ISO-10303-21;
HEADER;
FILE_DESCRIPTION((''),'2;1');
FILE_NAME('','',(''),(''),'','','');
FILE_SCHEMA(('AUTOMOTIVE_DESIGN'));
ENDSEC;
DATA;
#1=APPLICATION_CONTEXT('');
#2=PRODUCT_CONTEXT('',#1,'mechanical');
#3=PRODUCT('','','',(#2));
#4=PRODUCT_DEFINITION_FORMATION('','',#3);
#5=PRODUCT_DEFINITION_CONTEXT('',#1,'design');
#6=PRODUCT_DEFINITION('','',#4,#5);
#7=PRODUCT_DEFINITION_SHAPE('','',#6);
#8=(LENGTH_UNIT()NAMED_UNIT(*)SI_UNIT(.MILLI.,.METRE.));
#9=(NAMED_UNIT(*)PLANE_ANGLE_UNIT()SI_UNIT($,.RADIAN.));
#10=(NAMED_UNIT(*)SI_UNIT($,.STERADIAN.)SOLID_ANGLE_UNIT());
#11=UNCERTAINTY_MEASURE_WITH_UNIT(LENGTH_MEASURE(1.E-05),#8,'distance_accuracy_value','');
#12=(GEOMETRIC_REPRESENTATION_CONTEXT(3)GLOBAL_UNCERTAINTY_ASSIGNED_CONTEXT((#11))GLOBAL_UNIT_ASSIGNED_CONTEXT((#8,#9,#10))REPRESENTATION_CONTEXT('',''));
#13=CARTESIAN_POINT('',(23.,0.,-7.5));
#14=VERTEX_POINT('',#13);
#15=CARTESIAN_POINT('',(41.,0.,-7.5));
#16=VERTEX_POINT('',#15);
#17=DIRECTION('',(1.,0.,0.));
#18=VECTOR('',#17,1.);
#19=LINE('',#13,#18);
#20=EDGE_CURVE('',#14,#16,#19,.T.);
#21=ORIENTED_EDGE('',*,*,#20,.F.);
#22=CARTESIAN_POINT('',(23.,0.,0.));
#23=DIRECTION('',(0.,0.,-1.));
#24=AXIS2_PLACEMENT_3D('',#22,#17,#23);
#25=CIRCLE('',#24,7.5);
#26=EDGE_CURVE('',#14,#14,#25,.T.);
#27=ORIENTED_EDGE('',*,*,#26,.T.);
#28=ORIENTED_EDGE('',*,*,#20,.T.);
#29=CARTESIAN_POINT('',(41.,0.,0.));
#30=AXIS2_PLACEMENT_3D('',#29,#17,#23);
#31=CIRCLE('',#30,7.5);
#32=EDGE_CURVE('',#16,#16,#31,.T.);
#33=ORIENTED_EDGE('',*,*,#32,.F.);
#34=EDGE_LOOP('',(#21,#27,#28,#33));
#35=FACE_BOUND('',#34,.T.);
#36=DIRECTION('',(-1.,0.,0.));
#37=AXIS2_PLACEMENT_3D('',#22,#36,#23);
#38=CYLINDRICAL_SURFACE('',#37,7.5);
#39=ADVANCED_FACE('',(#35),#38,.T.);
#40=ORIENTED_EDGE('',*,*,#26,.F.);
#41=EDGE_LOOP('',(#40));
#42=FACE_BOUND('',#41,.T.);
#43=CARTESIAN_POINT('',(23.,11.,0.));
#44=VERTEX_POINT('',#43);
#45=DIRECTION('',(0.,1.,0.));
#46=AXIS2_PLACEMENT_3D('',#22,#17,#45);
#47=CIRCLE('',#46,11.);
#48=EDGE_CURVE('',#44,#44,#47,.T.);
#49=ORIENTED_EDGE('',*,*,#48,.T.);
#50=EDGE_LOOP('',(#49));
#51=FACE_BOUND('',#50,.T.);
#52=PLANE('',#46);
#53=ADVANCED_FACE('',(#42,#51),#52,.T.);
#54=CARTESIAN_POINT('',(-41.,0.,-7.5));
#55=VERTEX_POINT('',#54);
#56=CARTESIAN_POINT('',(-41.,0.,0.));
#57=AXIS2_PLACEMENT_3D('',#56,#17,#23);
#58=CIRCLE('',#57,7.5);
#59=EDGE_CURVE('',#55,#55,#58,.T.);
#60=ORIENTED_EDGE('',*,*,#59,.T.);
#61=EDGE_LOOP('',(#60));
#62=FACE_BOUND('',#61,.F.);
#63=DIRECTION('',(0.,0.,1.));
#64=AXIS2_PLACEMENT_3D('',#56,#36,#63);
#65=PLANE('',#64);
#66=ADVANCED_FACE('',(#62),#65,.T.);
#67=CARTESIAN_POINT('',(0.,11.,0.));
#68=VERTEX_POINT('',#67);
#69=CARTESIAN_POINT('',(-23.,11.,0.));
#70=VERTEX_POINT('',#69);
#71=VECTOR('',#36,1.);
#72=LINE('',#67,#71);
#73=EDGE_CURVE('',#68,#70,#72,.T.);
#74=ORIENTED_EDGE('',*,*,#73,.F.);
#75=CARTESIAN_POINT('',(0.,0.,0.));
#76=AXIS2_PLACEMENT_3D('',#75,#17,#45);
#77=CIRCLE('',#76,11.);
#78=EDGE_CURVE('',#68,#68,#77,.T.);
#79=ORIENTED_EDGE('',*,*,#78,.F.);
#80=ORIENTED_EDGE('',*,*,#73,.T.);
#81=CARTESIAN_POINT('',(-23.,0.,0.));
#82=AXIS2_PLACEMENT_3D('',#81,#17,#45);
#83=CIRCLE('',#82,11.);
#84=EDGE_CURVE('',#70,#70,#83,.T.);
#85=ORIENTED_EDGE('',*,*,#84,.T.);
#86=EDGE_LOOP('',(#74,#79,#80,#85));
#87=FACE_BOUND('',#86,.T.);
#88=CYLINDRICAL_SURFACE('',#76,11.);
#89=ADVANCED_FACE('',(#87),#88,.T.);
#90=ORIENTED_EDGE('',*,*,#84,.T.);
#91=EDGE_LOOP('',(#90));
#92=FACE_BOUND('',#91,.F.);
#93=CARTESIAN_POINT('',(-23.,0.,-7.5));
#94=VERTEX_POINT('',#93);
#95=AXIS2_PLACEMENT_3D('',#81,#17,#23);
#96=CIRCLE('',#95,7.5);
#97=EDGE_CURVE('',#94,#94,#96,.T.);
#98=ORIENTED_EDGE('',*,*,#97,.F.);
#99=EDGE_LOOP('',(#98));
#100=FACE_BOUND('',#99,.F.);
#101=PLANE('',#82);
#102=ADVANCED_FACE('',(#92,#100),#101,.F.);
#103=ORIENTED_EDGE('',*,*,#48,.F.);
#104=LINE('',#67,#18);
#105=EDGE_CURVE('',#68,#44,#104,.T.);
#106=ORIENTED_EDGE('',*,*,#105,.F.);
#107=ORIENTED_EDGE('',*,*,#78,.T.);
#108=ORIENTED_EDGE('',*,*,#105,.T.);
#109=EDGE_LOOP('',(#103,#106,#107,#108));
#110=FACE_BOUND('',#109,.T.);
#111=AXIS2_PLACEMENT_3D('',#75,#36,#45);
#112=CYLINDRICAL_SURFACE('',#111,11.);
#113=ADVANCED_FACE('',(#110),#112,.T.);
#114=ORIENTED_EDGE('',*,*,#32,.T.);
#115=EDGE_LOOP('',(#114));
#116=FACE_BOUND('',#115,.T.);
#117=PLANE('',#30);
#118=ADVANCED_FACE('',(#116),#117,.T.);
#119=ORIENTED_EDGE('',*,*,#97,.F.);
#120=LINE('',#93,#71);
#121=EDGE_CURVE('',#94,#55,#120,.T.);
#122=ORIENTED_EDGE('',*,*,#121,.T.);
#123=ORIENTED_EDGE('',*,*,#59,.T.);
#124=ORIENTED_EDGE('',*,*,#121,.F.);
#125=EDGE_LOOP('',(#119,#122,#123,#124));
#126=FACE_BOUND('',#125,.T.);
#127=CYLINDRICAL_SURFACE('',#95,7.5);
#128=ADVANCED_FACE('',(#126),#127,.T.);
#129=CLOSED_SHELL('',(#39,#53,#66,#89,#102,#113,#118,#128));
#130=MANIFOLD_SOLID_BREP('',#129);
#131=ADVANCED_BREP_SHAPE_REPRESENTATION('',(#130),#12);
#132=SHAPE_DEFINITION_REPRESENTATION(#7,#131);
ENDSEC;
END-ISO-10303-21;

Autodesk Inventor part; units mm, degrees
ref_plane "XZ Plane" through (0, 0, 0) normal (0, 1, 0) x (-1, 0, 0)
ref_plane "XY Plane" through (0, 0, 0) normal (0, 0, 1) x (1, 0, 0)
sketch "Sketch1" plane through (0, 0, 0) normal (1, 0, 0) x (0, 1, 0)
  circle A0 centre (0, 0) radius 11
  dimension "d0" = 22
extrude "Extrusion1" add sketch "Sketch1" along normal mid plane 46
sketch "Sketch3" plane through (23, 0, 0) normal (1, 0, 0) x (0, 0, -1)
  circle A0 centre (0, 0) radius 7.5
  dimension "d3" = 15
extrude "Extrusion2" add sketch "Sketch3" along normal blind 18
thread "Thread1" size "M15x1.5" class "6g" standard "ISO Metric profile" length 13
ref_plane "Work Plane1" through (0, 0, 0) normal (1, 0, 0) x (0, 1, 0)
mirror "Mirror2" about plane through (0, 0, 0) normal (1, 0, 0) of "Extrusion2"
properties part number "5. PlateSpacers" material "Silicon Nitride"
